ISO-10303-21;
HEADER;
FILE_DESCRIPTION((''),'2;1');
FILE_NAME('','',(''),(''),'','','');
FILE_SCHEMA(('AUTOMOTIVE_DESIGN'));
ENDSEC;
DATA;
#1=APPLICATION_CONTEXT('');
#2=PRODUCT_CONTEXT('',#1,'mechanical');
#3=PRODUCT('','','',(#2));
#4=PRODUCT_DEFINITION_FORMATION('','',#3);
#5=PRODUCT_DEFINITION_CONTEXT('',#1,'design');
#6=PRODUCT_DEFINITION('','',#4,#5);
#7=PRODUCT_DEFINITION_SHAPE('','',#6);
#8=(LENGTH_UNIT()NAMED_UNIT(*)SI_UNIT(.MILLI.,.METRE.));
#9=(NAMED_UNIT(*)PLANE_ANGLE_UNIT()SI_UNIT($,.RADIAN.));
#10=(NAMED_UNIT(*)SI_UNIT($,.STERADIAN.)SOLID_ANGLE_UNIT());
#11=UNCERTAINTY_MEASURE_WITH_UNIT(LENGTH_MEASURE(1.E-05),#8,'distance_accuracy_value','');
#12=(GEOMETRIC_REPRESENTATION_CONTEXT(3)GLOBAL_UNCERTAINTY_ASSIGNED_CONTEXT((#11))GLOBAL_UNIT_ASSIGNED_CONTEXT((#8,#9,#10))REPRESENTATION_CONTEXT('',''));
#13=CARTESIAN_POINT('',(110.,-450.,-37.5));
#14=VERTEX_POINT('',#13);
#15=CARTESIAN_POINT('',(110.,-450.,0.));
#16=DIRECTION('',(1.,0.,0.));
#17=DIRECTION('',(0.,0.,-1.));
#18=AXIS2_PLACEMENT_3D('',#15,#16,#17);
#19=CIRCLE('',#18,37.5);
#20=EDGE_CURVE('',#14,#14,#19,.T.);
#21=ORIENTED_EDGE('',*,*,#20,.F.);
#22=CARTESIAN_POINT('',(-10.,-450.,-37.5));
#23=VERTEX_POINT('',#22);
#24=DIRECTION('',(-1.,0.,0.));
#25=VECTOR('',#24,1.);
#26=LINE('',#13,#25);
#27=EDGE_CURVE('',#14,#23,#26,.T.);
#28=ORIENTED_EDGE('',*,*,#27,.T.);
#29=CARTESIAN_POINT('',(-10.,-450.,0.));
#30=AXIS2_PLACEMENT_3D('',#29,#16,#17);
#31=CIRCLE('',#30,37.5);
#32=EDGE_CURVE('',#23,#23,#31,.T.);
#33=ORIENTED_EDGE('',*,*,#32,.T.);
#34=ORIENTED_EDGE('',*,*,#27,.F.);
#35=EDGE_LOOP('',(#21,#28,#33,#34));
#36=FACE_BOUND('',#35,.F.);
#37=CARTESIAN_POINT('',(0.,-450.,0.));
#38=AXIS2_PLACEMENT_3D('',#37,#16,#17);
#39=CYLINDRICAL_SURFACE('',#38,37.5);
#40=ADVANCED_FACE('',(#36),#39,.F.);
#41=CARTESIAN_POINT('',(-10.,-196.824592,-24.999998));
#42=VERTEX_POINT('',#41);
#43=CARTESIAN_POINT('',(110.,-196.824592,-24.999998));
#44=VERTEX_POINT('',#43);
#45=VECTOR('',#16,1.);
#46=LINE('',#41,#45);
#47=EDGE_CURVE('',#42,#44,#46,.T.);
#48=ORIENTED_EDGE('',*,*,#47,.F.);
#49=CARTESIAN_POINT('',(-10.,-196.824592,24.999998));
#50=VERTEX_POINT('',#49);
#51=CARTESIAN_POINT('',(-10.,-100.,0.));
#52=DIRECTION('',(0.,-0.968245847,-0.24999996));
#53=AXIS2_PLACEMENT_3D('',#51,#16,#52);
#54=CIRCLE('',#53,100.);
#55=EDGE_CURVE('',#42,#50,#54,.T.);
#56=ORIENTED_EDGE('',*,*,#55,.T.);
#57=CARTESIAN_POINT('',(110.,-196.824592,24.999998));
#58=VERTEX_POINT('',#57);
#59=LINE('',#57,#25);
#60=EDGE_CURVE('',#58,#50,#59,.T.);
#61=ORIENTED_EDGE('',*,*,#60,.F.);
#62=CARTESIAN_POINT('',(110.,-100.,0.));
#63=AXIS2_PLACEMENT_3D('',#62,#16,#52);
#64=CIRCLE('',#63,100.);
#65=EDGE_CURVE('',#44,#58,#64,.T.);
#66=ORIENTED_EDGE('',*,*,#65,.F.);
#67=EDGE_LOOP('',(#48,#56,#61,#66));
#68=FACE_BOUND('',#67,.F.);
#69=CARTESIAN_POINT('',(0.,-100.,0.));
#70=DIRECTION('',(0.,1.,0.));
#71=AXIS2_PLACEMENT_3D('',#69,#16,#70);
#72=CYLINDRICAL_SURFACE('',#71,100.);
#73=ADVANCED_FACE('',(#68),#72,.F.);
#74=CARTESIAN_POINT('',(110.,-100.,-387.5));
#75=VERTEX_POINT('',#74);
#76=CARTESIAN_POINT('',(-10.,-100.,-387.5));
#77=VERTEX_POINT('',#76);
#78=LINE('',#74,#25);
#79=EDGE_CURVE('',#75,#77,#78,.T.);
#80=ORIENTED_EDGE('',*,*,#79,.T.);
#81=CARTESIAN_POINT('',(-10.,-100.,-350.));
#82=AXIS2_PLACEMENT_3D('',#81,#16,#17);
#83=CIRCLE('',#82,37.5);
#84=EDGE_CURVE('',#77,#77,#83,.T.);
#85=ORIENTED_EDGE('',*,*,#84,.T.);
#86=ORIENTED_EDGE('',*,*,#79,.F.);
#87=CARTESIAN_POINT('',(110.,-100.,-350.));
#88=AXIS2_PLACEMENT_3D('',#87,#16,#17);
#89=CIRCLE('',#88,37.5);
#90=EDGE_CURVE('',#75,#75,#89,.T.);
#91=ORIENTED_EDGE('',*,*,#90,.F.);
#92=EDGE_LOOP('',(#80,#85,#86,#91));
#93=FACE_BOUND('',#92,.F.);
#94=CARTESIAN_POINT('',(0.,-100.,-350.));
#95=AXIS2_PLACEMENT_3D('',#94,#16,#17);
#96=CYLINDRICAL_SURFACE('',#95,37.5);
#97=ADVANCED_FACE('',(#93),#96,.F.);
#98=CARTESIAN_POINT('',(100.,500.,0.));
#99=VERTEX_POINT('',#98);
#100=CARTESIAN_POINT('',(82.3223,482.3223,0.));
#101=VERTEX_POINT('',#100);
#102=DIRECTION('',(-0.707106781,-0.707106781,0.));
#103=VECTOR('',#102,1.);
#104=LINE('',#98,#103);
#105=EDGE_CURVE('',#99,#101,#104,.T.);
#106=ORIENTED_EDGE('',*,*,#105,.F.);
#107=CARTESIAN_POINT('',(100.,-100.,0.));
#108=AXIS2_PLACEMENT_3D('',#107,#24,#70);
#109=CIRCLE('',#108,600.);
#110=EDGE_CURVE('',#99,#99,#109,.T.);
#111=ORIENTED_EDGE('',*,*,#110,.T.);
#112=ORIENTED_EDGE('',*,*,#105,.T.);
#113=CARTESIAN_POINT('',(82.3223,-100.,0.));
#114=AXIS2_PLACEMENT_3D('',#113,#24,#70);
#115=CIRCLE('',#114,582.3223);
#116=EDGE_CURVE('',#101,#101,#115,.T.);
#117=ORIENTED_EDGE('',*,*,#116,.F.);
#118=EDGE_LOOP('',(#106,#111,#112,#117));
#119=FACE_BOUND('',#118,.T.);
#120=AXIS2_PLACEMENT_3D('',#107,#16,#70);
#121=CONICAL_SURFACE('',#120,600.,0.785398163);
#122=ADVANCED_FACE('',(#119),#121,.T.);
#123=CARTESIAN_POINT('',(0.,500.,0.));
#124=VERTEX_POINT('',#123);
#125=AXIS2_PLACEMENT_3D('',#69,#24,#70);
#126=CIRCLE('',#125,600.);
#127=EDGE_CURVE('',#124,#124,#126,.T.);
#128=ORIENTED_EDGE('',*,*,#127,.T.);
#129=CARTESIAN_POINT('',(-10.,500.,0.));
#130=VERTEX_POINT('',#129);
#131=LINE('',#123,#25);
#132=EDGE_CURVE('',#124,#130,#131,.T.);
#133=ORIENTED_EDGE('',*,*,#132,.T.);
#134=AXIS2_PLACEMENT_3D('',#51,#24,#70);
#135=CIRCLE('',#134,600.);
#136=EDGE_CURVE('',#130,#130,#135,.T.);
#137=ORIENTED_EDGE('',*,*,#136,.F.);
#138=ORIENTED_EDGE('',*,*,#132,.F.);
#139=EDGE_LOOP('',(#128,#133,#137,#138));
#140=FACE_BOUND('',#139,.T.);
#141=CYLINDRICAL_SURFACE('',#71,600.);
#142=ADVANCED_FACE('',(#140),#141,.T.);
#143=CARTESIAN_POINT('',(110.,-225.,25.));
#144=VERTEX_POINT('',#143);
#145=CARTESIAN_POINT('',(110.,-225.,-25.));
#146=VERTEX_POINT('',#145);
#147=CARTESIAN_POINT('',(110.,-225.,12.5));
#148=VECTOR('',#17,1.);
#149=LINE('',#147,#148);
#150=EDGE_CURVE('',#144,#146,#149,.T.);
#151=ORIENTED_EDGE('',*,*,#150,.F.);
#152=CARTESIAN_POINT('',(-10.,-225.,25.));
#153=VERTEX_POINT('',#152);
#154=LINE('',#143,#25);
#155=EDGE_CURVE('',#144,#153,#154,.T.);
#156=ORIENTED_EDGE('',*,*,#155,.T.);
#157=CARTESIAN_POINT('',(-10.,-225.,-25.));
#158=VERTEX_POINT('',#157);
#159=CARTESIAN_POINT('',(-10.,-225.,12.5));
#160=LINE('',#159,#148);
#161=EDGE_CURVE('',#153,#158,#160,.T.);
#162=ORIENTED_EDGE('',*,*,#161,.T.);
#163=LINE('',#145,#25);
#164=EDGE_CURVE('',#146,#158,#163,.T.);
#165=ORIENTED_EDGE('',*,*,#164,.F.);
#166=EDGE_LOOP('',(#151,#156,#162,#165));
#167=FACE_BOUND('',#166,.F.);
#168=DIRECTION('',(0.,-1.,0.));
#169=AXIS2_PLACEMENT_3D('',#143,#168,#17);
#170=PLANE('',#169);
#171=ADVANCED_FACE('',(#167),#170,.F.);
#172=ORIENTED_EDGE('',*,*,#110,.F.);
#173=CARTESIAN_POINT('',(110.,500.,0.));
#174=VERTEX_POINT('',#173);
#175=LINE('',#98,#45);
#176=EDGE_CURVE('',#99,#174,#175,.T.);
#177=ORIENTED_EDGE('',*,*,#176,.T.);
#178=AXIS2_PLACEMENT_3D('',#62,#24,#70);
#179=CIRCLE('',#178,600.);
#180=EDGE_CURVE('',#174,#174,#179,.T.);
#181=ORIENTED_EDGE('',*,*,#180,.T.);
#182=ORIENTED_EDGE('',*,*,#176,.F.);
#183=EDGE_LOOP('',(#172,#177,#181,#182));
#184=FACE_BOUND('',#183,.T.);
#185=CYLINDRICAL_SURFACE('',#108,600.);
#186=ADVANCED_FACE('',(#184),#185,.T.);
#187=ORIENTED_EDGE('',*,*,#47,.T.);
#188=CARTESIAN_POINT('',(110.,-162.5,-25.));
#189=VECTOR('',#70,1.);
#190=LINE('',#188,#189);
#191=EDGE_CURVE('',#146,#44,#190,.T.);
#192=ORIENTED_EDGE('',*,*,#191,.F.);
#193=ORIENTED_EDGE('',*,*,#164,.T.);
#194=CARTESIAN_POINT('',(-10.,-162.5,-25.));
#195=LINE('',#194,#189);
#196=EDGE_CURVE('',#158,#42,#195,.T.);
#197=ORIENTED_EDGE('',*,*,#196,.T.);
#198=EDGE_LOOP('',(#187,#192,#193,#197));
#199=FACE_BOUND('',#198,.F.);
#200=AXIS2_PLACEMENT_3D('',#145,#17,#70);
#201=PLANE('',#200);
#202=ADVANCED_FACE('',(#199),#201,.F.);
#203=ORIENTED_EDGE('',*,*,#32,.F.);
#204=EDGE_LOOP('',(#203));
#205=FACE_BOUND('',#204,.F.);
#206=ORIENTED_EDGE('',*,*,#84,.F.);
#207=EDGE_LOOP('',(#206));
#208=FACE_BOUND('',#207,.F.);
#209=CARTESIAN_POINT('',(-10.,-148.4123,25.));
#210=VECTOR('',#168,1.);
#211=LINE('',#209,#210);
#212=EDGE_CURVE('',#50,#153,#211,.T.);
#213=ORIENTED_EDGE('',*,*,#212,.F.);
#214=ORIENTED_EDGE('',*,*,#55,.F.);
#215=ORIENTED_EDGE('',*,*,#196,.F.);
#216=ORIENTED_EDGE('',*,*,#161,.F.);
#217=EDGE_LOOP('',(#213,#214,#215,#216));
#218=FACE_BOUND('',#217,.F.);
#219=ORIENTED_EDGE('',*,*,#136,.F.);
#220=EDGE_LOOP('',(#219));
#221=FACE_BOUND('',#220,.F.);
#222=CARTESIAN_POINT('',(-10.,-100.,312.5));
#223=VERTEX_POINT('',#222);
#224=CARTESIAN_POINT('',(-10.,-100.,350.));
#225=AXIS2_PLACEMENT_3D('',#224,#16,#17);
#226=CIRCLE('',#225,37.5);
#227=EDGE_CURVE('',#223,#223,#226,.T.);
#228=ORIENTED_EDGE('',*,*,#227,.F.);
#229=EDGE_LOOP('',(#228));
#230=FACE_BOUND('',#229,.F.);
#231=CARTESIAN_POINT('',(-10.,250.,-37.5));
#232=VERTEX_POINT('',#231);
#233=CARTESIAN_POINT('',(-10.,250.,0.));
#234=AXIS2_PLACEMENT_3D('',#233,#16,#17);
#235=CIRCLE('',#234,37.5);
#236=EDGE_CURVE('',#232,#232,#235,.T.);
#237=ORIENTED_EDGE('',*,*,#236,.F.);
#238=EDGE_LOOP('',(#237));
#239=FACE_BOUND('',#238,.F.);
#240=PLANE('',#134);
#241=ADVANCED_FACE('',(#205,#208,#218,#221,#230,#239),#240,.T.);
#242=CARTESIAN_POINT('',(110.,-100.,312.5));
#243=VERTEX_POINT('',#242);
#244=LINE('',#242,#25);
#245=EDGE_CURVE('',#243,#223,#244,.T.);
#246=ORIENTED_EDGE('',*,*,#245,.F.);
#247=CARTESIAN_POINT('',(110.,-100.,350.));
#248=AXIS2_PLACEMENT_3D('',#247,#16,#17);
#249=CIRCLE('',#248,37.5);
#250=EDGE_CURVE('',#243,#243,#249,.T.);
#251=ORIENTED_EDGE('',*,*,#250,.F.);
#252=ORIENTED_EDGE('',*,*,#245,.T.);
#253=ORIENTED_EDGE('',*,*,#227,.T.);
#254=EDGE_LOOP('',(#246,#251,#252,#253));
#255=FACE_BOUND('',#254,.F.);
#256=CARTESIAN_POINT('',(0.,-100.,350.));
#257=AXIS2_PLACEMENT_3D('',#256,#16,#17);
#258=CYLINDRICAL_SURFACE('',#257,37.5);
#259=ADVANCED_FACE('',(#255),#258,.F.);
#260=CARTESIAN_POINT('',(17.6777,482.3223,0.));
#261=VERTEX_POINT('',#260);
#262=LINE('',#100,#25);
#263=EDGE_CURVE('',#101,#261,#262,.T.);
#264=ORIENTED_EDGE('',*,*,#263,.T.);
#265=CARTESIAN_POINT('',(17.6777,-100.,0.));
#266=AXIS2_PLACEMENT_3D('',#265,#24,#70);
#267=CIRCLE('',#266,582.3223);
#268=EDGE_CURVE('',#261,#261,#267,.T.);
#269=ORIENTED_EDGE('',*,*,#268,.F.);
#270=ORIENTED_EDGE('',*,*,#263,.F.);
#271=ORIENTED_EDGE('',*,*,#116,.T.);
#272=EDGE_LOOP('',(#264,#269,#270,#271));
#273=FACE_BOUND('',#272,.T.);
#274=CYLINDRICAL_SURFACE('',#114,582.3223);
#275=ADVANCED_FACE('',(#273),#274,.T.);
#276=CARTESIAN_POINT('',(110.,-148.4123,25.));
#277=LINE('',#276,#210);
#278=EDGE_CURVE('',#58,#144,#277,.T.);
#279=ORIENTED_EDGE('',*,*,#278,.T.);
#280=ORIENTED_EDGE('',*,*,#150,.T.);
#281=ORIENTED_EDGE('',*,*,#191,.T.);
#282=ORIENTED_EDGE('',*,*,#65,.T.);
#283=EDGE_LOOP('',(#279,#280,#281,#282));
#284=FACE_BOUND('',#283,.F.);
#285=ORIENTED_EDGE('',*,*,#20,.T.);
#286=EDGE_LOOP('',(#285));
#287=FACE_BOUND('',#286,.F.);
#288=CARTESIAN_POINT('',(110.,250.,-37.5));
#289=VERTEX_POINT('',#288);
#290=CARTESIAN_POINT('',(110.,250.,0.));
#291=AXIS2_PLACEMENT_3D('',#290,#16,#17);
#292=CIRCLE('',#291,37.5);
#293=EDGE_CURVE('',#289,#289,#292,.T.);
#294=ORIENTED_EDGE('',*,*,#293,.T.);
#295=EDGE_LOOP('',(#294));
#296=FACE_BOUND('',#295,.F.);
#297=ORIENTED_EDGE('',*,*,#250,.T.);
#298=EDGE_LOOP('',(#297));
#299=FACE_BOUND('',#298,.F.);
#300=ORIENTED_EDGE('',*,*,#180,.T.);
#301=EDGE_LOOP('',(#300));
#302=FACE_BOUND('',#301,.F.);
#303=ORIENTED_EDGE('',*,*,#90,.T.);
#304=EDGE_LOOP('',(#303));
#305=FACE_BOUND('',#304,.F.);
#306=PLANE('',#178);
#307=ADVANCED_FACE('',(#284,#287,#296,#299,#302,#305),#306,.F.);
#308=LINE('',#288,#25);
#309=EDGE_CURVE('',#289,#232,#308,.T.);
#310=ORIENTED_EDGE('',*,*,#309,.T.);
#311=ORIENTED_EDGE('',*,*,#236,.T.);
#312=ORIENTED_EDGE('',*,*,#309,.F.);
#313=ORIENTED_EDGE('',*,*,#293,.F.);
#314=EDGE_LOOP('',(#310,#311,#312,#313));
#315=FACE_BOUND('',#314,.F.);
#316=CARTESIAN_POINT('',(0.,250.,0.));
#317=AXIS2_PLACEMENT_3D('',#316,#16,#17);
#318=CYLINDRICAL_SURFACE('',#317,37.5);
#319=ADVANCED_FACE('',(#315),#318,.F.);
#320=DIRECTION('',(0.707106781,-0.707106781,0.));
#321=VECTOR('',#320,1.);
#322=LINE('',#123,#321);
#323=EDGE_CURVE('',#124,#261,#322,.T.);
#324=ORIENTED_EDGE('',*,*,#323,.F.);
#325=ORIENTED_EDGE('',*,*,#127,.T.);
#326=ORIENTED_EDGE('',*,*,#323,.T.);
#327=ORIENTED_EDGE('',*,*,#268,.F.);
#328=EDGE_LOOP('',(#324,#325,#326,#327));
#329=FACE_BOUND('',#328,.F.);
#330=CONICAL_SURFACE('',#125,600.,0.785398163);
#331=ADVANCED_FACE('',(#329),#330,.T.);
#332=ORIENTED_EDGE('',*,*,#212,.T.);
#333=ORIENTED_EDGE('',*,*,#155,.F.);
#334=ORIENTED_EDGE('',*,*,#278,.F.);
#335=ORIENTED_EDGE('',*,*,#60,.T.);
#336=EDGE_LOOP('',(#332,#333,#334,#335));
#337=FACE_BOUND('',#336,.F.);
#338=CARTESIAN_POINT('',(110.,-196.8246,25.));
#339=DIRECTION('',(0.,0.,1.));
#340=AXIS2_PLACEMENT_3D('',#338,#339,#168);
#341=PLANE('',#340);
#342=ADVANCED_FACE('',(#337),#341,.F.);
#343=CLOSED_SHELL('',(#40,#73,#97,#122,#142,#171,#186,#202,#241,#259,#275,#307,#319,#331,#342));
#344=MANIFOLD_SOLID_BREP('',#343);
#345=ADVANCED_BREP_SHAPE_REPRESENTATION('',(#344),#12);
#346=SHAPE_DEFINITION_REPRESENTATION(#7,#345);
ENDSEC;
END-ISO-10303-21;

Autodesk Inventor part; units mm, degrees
ref_plane "YZ Plane" through (0, 0, 0) normal (1, 0, 0) x (0, 1, 0)
ref_plane "XZ Plane" through (0, 0, 0) normal (0, 1, 0) x (-1, 0, 0)
ref_plane "XY Plane" through (0, 0, 0) normal (0, 0, 1) x (1, 0, 0)
sketch "Boceto1" plane through (0, 0, 0) normal (0, 0, 1) x (1, 0, 0)
  line L0 (0, 0) -> (0, 500)
  line L1 (100, 500) -> (100, 0)
  line L2 (100, 0) -> (0, 0)
  line L3 (0, 500) -> (17.6777, 482.3223)
  line L4 (100, 500) -> (82.3223, 482.3223)
  line L5 (82.3223, 482.3223) -> (17.6777, 482.3223)
  line L6 (50, -100) -> (-150, -100)
revolve "Revolución1" add sketch "Boceto1" angle 360 about axis through (50, -100, 0) along (-1, 0, 0)
sketch "Boceto2" plane through (100, -100, 0) normal (1, 0, 0) x (0, 0, -1)
  circle A0 centre (0, 0) radius 100 projected
  circle A1 centre (-350, 0) radius 37.5
  circle A2 centre (0, 350) radius 37.5
  circle A3 centre (350, 0) radius 37.5
  circle A4 centre (0, -350) radius 37.5
  point P0 (0, 100)
  dimension "d26" = 360
extrude "Extrusión1" cut sketch "Boceto2" against normal blind 100 contours A1 | A2 | A3 | A4
thicken "Engrosado1" operation add thickness 10 both sides no extend neighbours no toward (1, 0, 0) faces at (100, -364.9419, 262.9039)
thicken "Engrosado2" operation add thickness 10 both sides no extend neighbours no toward (-1, 0, 0) faces at (0, -364.9419, 262.9039)
sketch "Boceto3" plane through (110, -100, 0) normal (1, 0, 0) x (0, 0, -1)
  line L0 (-25, -96.8246) -> (-25, -125)
  line L1 (-25, -125) -> (25, -125)
  line L2 (25, -125) -> (25, -96.8246)
  circle A0 centre (0, 0) radius 100 projected
  arc A1 (-25, -96.8246) -> (25, -96.8246) centre (0, 0) ccw
  point P0 (0, 100)
  point P1 (0, -100)
emboss "Repujado1" sketch "Boceto3" operation cut depth 120 direction (-1, 0, 0) contours A0 L2 L1 L0
properties part number "POLEA Pieza"
